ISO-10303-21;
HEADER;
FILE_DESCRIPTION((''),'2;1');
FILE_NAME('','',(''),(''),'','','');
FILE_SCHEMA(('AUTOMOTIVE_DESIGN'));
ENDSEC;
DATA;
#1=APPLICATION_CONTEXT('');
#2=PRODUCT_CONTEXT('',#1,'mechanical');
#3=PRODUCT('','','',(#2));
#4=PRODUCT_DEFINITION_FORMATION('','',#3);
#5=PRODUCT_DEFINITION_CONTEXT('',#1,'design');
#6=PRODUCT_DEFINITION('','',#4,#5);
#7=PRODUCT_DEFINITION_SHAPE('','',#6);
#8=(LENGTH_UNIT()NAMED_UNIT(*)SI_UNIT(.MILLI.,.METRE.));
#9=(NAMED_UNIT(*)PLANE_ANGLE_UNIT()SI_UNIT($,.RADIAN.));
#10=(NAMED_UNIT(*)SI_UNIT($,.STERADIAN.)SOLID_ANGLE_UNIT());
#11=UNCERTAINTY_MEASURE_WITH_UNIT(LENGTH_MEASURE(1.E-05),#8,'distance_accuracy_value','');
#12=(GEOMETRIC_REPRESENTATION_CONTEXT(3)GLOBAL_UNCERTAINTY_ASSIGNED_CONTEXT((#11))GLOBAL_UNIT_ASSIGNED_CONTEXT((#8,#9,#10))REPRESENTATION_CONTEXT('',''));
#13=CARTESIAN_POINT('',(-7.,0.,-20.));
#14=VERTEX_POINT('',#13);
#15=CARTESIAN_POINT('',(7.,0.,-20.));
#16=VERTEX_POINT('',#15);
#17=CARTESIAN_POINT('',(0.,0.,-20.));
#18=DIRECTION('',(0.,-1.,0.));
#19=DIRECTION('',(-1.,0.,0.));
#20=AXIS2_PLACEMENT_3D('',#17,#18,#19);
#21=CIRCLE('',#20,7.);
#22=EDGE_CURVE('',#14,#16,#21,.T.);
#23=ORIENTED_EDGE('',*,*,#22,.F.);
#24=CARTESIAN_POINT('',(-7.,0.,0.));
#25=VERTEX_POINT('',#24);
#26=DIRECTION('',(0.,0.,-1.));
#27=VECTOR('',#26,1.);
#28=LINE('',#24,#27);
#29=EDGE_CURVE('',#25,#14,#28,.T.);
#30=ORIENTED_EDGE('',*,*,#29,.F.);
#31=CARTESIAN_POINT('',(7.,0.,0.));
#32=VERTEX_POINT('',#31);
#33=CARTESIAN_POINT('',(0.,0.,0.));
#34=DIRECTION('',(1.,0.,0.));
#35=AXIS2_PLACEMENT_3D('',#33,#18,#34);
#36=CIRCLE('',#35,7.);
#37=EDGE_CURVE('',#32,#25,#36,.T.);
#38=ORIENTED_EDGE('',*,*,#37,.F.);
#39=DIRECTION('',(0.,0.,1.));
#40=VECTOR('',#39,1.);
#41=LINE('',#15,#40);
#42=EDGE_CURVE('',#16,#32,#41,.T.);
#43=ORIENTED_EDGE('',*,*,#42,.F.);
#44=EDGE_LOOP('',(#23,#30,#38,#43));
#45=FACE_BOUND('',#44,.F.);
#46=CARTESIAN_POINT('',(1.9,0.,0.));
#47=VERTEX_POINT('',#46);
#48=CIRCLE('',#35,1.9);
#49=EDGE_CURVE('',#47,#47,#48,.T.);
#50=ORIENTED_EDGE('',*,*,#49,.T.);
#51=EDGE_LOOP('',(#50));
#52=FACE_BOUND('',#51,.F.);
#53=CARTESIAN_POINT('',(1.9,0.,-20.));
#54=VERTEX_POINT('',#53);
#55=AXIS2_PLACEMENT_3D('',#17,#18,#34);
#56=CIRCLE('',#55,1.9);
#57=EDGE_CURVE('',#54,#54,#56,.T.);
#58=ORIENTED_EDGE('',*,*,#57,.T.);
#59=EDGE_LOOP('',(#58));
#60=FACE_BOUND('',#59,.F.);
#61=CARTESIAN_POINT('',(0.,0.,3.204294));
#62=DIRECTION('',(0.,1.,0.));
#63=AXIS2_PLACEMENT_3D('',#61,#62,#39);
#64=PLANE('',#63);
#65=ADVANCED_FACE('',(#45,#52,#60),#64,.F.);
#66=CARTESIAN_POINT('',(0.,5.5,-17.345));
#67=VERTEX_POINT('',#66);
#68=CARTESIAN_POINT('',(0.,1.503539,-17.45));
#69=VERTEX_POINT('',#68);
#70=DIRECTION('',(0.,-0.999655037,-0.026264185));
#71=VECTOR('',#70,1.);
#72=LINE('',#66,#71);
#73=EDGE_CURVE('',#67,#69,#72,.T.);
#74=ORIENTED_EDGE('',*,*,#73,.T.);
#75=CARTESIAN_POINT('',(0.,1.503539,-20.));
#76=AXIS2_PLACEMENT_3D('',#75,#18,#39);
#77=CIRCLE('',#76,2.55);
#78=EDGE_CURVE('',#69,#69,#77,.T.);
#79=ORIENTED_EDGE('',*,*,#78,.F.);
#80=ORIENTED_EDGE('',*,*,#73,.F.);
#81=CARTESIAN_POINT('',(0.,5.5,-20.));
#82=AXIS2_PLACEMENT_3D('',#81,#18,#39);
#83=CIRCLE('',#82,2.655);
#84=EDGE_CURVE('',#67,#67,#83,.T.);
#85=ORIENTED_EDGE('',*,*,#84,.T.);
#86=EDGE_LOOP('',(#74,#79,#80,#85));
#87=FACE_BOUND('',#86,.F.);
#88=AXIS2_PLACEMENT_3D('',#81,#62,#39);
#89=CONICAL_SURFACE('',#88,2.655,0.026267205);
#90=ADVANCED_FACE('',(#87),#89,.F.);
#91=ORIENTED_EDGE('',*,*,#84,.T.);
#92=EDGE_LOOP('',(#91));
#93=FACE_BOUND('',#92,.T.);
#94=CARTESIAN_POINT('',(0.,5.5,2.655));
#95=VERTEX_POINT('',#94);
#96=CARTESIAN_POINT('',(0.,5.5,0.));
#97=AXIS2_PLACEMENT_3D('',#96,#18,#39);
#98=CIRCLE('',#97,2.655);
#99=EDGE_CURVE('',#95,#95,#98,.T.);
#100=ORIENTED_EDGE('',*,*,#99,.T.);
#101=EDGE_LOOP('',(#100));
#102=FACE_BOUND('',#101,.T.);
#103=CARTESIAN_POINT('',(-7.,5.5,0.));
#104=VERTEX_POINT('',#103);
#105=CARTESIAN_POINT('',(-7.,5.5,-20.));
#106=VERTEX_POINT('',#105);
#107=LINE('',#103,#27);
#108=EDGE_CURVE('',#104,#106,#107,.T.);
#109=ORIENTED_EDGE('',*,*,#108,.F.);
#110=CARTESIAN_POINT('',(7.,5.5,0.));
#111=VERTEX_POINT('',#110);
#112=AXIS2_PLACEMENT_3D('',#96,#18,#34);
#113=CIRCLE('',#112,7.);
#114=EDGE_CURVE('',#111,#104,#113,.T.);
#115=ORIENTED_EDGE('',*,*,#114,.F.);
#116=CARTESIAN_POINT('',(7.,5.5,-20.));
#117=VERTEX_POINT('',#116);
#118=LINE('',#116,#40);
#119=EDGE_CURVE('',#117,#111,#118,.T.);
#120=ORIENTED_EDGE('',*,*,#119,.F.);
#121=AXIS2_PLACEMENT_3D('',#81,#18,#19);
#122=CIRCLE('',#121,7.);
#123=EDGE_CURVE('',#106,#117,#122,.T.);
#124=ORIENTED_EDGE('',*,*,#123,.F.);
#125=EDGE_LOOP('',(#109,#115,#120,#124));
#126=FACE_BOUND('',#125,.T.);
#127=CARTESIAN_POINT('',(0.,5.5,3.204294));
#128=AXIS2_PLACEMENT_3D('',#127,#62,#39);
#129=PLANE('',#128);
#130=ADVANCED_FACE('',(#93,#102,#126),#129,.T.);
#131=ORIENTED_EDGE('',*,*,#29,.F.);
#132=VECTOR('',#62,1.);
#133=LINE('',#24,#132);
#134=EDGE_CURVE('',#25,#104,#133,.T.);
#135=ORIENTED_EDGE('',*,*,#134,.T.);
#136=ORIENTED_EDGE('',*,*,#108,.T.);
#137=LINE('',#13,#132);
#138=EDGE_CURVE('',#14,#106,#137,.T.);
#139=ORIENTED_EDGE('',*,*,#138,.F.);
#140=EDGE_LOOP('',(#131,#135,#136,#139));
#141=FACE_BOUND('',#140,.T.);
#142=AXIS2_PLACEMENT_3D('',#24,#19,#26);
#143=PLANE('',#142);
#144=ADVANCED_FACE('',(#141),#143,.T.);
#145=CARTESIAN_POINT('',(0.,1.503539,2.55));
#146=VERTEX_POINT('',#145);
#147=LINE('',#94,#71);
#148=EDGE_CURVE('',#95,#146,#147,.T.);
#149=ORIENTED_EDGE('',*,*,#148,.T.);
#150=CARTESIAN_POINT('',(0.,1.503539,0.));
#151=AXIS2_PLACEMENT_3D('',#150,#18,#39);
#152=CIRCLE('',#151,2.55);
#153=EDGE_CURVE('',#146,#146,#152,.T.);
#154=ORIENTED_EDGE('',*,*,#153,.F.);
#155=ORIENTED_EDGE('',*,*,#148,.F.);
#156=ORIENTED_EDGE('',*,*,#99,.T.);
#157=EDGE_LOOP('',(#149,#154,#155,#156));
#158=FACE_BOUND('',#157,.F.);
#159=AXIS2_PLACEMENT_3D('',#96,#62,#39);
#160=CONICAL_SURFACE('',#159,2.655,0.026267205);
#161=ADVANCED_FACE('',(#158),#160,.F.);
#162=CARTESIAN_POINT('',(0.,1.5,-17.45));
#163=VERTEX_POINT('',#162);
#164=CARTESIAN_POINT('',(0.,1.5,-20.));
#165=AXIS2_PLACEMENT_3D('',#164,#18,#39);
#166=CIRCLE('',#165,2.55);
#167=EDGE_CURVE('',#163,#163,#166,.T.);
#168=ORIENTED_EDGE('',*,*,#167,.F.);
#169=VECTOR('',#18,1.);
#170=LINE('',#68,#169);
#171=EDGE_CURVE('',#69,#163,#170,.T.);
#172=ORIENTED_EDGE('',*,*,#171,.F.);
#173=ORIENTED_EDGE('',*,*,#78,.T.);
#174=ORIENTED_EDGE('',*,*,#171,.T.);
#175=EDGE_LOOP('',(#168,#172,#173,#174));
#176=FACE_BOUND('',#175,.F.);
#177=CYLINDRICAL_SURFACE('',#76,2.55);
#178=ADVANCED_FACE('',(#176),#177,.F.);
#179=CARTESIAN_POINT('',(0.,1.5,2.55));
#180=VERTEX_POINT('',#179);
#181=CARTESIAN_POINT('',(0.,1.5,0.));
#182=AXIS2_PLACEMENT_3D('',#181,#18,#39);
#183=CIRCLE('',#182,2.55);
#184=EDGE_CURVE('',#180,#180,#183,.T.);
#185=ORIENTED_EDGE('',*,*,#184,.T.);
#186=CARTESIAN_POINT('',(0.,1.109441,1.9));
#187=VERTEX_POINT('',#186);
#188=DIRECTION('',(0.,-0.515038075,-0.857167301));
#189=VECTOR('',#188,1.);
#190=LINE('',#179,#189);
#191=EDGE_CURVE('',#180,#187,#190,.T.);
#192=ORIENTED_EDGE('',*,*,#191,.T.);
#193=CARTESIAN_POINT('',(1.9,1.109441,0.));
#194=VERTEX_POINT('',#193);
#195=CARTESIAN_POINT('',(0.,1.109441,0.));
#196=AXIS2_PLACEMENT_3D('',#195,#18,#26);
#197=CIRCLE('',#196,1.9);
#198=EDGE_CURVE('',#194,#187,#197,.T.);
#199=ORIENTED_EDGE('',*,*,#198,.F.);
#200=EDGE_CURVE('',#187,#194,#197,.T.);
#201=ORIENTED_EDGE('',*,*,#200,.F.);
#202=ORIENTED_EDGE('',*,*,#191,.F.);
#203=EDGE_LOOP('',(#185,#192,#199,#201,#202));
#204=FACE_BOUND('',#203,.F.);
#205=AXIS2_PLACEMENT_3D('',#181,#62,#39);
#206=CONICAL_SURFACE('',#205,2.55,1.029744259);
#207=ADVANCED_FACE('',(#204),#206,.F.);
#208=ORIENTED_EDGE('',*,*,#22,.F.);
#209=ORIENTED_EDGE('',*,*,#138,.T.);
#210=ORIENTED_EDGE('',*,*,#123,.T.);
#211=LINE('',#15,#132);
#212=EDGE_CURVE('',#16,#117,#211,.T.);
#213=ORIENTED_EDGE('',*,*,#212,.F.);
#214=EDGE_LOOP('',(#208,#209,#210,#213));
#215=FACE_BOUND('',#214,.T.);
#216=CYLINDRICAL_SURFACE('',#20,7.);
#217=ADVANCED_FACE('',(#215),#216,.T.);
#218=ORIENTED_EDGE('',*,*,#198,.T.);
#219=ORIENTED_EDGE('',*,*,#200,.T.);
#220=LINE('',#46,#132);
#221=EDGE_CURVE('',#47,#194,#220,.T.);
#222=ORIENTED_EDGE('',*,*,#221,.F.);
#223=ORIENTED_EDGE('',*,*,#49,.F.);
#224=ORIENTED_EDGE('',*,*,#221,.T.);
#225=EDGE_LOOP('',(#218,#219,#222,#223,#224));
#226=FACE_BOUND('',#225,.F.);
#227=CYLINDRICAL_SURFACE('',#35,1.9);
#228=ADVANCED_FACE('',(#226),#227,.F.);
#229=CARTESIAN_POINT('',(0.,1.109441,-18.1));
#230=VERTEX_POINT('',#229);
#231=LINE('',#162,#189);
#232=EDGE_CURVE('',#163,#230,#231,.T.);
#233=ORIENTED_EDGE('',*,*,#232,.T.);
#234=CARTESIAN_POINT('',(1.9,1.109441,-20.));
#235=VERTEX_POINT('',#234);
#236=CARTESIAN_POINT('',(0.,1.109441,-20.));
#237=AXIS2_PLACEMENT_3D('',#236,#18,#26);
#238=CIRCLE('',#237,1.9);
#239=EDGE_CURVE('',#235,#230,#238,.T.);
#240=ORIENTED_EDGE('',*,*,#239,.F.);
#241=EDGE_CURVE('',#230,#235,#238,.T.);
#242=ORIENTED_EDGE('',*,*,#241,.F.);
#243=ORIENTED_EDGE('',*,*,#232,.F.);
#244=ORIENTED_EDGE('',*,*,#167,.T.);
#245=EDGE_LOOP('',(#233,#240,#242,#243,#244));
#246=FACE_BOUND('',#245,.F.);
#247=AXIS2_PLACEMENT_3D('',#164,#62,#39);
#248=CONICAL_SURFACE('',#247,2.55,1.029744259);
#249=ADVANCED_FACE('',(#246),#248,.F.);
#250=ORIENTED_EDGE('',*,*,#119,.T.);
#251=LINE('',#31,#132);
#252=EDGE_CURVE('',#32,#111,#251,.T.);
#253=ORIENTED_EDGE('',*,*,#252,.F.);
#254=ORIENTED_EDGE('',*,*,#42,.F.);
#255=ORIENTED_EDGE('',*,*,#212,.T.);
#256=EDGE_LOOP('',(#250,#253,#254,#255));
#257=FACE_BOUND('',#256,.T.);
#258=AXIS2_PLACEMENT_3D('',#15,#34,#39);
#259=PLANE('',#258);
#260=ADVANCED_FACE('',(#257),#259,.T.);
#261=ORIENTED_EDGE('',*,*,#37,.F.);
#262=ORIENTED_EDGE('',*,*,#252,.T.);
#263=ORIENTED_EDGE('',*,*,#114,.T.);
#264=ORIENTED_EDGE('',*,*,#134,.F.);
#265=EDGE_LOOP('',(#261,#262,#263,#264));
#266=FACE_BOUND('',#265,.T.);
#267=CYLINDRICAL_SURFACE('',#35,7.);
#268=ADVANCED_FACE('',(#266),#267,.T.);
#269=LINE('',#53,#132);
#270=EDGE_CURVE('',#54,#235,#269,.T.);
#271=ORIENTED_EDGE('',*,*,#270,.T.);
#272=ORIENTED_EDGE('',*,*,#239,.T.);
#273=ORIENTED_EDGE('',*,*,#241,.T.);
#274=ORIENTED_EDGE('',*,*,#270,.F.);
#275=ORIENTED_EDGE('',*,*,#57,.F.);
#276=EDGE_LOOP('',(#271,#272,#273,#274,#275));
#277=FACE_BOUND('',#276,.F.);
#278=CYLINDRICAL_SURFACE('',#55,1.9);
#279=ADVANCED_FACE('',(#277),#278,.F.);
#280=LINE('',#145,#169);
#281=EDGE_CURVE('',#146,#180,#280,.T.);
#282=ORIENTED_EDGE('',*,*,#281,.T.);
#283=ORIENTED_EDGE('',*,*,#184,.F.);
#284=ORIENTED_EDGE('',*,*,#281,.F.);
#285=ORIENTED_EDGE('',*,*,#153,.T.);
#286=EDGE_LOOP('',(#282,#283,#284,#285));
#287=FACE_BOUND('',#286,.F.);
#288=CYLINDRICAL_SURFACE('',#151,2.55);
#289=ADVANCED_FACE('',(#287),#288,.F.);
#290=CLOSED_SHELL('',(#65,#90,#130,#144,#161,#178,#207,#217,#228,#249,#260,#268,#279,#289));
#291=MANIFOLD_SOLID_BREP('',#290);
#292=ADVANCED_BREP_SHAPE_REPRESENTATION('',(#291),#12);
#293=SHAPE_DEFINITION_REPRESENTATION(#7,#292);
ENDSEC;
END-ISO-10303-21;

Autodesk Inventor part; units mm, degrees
ref_plane "YZ Plane" through (0, 0, 0) normal (1, 0, 0) x (0, 1, 0)
ref_plane "XZ Plane" through (0, 0, 0) normal (0, 1, 0) x (-1, 0, 0)
ref_plane "XY Plane" through (0, 0, 0) normal (0, 0, 1) x (1, 0, 0)
sketch "Sketch1" plane through (0, 0, 0) normal (0, 1, 0) x (-1, 0, 0)
  line L0 (0, 0) -> (0, -20)
  line L1 (0, 0) -> (-4, 0) construction
  line L2 (0, -20) -> (-4, -20) construction
  line L3 (0, 0) -> (-5, 0)
  arc A0 (5, 0) -> (-5, 0) centre (0, 0) ccw
  line L4 (-5, 0) -> (-5, -20)
  arc A1 (-5, -20) -> (5, -20) centre (0, -20) ccw
  line L5 (5, -20) -> (5, 0)
  dimension "d11" = 20
  dimension "d12" = 5
  dimension "d13" = 90
  dimension "d14" = 20
sketch "Sketch1 outline for Extrusion1" plane through (0, 0, 0) normal (0, 1, 0) x (-1, 0, 0)
  arc A0 (-5, 0) -> (5, 0) centre (0, 0) cw
  line L0 (5, 0) -> (5, -20)
  arc A1 (5, -20) -> (-5, -20) centre (0, -20) cw
  line L1 (-5, -20) -> (-5, 0)
extrude "Extrusion1" add sketch "Sketch1 outline for Extrusion1" along normal blind 5.5
sketch "Sketch2" plane through (0, 5.5, 0) normal (0, 1, 0) x (1, 0, 0)
  circle A0 centre (0, 0) radius 2.655
  line L0 (0, 0) -> (0, 20)
  circle A1 centre (0, 20) radius 2.655
  dimension "d7" = 5.31
  dimension "d8" = 20
  dimension "d9" = 5.31
sketch "Sketch3" plane through (0, 0, 0) normal (0, -1, 0) x (1, 0, 0)
  circle A0 centre (0, 0) radius 1.9
  line L0 (0, 0) -> (0, -20)
  circle A1 centre (0, -20) radius 1.9
  dimension "d15" = 3.8
  dimension "d16" = 20
  dimension "d17" = 3.8
sketch "Sketch3 outline for Extrusion2" plane through (0, 0, 0) normal (0, -1, 0) x (1, 0, 0)
  circle A0 centre (0, 0) radius 1.9
  circle A1 centre (0, -20) radius 1.9
extrude "Extrusion2" cut sketch "Sketch3 outline for Extrusion2" against normal blind 1.2
sketch "Sketch4" plane through (0, 1.2, -20) normal (0, -1, 0) x (1, 0, 0)
  circle A0 centre (0, 0) radius 1.9 projected
  circle A1 centre (0, 0) radius 1.9
  circle A2 centre (0, 20) radius 1.9
sketch "Sketch5" plane through (5, 0, 0) normal (1, 0, 0) x (0, 0, -1)
  line L0 (0, 0) -> (0, 5.5) projected
  line L1 (0, 0) -> (0, 5.5)
hole "Hole1" at (0, 5.5, 0) at (0, 5.5, -20) direction (0, -1, 0) diameter 5.1 depth 4 tip angle 118 countersink diameter 5.31 countersink angle 3.01
thicken "Thicken1" operation add thickness 2 both sides no extend neighbours yes toward (0.9967573, 0, -0.0804666) faces at (4.983787, 3.666667, -20.402333) (5, 1.833333, -13.333333) (-5, 1.833333, -6.666667) (-4.983787, 3.666667, 0.402333)
properties part number "Rod_constraint"
